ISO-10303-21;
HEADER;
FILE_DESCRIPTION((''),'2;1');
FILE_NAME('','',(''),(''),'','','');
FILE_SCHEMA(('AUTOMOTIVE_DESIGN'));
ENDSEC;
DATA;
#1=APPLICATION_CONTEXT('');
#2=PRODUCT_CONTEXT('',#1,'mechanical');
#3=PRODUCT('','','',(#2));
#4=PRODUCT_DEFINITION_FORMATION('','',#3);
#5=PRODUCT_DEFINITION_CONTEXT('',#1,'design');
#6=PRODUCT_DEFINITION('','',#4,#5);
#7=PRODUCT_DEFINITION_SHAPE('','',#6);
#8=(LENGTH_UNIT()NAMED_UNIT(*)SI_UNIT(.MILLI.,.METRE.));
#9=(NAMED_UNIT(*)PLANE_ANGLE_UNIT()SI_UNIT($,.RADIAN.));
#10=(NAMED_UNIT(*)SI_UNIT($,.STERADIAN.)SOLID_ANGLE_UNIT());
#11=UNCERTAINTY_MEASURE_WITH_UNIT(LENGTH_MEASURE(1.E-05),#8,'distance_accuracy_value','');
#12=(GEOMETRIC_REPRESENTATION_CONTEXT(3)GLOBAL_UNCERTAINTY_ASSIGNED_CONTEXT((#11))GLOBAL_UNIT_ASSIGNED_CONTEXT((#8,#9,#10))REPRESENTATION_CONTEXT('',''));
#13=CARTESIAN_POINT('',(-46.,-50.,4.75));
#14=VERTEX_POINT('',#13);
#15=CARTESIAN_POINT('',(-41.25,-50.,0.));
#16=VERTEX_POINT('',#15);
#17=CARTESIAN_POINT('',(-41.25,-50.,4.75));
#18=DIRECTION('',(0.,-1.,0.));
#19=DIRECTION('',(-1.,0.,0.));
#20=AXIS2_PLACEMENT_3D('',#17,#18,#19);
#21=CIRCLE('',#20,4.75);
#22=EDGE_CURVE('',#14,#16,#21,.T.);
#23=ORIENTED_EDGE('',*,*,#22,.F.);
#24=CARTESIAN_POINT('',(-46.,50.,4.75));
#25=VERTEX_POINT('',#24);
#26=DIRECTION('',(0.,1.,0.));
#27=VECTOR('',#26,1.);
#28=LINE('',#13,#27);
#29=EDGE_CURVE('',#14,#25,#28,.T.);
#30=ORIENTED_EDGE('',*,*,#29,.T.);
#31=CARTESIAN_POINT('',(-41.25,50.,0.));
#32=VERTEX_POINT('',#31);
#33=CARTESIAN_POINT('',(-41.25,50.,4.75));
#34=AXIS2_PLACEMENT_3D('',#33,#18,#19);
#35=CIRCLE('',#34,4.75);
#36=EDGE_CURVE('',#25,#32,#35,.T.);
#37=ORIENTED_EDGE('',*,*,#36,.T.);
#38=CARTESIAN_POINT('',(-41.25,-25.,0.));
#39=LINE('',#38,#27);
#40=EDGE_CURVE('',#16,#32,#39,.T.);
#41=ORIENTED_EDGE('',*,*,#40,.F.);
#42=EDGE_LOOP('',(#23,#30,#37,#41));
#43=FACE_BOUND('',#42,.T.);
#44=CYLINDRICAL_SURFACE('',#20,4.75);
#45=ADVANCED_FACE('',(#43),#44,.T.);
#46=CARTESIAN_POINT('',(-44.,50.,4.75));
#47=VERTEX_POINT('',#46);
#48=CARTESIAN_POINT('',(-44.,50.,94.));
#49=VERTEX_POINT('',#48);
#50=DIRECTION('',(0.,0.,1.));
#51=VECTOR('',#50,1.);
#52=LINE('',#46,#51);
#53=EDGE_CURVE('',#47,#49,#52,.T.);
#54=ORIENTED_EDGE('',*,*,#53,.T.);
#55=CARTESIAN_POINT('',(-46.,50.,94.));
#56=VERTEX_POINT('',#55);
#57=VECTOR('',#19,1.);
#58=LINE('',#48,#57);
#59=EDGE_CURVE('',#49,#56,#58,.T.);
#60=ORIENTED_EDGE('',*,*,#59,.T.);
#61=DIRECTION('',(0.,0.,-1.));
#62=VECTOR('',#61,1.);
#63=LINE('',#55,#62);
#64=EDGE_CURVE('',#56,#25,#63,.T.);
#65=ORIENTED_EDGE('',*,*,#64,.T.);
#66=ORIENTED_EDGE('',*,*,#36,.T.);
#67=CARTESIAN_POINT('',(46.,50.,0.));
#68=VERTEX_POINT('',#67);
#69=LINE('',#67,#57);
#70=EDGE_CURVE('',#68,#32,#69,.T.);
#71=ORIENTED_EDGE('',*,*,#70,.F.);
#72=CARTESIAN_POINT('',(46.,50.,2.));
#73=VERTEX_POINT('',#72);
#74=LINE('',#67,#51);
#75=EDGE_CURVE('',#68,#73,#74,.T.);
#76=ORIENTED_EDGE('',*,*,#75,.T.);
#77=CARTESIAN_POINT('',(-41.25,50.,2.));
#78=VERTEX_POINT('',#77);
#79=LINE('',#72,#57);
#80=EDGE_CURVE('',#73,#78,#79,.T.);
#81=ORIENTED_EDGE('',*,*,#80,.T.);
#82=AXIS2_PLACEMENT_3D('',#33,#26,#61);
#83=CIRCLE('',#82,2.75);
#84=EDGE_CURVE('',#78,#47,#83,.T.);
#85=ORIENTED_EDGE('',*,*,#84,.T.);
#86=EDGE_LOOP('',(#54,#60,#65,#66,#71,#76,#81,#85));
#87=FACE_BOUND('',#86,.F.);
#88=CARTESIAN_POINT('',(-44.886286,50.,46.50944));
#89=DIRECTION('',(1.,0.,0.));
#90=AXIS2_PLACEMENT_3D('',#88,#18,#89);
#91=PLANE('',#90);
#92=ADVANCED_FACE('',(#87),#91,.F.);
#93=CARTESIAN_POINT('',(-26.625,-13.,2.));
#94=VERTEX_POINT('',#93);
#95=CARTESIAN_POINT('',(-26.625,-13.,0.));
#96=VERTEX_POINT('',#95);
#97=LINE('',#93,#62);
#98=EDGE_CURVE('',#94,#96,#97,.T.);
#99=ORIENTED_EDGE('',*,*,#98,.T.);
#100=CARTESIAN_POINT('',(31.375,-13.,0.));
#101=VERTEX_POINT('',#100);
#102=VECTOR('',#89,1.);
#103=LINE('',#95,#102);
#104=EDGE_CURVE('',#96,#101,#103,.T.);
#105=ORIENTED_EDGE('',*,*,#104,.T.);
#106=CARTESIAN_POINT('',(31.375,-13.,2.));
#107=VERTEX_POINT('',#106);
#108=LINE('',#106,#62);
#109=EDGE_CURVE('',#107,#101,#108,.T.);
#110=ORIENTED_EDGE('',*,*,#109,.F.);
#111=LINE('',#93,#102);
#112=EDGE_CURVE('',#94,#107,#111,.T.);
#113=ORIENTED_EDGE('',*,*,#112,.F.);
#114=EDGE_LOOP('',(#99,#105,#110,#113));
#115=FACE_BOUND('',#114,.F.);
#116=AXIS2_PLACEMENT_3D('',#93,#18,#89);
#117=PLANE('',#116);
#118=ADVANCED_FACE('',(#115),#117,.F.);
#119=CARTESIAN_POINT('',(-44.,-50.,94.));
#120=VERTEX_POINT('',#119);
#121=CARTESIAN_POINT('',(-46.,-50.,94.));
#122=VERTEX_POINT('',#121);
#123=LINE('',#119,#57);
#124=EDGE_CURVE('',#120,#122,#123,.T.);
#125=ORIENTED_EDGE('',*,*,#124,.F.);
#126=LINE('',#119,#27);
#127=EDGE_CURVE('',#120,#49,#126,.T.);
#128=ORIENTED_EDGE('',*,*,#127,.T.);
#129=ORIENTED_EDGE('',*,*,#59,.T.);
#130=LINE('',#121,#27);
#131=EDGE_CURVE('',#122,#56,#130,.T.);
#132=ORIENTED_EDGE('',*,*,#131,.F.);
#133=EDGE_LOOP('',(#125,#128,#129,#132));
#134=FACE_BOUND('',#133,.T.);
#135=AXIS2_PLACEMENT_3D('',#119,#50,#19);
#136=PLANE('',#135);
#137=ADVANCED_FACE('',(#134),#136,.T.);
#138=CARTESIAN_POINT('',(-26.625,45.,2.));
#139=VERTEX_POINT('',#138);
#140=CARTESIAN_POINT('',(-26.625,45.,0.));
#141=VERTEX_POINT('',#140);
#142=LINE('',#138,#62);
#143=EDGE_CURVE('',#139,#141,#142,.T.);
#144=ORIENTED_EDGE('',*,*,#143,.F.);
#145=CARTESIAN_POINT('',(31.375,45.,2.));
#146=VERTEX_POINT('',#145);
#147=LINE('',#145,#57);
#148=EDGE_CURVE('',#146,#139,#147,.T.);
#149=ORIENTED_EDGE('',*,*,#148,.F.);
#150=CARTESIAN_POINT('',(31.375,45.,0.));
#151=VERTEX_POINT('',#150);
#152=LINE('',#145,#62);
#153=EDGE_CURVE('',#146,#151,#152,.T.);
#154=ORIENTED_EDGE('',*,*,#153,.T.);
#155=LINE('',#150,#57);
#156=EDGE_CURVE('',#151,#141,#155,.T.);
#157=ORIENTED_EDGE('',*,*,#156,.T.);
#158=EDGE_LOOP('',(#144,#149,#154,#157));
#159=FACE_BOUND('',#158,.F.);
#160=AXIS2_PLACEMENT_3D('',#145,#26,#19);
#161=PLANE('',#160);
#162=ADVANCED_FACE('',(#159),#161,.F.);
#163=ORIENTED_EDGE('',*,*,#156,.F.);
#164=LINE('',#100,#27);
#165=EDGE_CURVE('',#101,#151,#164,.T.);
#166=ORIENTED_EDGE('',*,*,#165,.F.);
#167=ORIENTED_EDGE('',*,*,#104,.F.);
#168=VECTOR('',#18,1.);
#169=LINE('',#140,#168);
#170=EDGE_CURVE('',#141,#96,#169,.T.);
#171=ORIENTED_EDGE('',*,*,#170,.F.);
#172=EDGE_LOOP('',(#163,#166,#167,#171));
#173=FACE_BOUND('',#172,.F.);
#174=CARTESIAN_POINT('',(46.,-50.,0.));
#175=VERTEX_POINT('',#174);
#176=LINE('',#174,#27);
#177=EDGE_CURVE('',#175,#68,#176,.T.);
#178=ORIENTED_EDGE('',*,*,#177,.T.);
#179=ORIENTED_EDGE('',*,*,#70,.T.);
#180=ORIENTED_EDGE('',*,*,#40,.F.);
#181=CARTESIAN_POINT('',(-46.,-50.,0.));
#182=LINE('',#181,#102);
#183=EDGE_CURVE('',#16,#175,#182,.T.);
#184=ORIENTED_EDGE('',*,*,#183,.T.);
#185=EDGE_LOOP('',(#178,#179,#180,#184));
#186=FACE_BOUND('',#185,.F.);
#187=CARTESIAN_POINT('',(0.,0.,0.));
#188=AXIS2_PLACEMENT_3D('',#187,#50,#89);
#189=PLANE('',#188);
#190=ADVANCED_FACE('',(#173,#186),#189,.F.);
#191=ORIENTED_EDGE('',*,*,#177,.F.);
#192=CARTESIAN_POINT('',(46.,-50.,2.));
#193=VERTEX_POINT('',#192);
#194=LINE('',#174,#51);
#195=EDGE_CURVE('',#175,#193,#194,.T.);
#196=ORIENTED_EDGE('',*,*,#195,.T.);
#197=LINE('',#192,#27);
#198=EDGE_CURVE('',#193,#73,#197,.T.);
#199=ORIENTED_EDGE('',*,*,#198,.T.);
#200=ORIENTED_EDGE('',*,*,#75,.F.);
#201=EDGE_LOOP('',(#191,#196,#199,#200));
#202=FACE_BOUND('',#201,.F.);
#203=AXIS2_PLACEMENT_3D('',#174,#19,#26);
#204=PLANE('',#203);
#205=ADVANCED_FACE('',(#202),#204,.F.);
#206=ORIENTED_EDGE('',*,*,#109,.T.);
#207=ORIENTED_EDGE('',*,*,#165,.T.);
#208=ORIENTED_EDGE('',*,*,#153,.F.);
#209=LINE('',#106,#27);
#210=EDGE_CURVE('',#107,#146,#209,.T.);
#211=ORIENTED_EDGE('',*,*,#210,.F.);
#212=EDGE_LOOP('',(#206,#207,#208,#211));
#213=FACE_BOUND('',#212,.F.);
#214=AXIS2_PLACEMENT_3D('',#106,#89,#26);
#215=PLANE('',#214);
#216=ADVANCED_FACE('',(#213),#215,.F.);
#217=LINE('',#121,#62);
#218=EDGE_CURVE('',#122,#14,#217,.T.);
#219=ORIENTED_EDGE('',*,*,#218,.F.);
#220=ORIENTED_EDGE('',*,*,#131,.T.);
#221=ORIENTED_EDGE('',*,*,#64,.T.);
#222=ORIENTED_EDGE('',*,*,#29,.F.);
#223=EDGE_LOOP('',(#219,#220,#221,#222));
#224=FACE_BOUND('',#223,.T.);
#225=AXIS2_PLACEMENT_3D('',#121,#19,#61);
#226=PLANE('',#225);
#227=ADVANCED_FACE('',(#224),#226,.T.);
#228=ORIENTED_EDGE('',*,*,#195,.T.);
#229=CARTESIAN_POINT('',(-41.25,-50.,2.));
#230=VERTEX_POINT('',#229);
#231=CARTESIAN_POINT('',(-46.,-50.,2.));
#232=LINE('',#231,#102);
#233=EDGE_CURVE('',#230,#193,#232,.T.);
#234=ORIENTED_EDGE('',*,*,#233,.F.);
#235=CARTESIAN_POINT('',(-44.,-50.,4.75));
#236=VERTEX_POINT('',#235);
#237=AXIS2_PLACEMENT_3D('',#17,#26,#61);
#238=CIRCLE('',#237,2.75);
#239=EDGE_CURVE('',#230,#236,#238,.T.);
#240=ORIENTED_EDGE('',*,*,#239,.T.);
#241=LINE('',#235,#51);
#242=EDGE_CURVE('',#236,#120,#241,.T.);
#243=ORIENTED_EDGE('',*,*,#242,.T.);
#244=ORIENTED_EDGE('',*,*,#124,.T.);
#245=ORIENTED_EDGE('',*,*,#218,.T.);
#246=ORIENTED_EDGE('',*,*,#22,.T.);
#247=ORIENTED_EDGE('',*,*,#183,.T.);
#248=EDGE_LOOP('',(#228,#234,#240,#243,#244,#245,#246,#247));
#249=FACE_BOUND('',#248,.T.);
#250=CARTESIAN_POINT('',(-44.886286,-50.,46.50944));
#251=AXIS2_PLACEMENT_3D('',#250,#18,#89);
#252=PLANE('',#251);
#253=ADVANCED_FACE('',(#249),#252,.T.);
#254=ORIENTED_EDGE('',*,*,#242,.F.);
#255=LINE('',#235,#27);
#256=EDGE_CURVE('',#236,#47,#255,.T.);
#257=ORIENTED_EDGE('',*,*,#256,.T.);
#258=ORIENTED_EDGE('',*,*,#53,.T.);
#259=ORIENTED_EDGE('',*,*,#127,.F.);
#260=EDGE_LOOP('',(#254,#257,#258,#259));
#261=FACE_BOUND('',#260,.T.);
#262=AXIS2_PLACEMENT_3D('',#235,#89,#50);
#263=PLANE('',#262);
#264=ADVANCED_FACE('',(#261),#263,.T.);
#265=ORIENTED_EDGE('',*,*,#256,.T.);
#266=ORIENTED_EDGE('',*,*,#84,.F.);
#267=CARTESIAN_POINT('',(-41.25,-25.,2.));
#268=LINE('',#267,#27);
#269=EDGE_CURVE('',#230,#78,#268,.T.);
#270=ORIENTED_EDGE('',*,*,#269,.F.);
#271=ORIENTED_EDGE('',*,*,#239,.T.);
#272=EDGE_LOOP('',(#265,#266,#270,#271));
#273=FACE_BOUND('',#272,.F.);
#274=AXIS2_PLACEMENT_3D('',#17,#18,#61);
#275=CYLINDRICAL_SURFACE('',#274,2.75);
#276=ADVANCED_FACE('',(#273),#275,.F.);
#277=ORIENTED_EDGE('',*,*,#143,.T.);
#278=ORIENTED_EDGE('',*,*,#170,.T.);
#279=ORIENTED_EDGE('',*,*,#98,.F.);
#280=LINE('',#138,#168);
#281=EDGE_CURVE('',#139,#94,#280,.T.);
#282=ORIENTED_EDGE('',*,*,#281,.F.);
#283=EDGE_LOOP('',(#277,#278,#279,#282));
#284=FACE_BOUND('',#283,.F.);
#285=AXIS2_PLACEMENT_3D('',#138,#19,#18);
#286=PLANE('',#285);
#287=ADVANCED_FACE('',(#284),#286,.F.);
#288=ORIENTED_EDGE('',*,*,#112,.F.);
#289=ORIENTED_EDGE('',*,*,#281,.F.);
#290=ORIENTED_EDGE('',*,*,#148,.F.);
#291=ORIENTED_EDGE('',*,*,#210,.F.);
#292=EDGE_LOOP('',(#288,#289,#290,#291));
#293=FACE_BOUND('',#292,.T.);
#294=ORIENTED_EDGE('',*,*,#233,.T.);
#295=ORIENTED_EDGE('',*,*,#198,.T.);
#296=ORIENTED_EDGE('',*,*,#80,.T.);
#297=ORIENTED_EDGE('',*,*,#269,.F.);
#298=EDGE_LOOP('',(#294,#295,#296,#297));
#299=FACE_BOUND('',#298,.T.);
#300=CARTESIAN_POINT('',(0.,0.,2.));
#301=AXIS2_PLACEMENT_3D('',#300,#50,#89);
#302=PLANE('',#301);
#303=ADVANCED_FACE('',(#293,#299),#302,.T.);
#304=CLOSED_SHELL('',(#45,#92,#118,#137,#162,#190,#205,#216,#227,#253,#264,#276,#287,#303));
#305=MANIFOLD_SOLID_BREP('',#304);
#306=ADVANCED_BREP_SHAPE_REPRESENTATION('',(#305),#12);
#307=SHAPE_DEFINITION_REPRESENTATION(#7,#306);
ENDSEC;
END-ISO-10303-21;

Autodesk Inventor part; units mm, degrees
ref_plane "YZ Plane" through (0, 0, 0) normal (1, 0, 0) x (0, 1, 0)
ref_plane "XZ Plane" through (0, 0, 0) normal (0, 1, 0) x (-1, 0, 0)
ref_plane "XY Plane" through (0, 0, 0) normal (0, 0, 1) x (1, 0, 0)
sketch "Sketch1" plane through (0, 0, 0) normal (0, 0, 1) x (1, 0, 0)
  line L0 (-46, -50) -> (46, -50)
  line L1 (46, -50) -> (46, 50)
  line L2 (46, 50) -> (-46, 50)
  line L3 (-46, 50) -> (-46, -50)
  line L4 (-46, -50) -> (46, 50) construction
  line L5 (46, -50) -> (-46, 50) construction
  point P0 (0, 0)
  dimension "d154" = 92
  dimension "d155" = 100
extrude "Plate5" add sketch "Sketch1" along normal blind 2
sketch "Sketch7" plane through (-44, -50, 0) normal (-1, 0, 0) x (0, -1, 0)
  line L0 (-100, 0) -> (0, 0)
  line L1 (0, 0) -> (0, 94)
  line L2 (0, 94) -> (-100, 94)
  line L3 (-100, 94) -> (-100, 0)
edge flange "Flange3" height 94 angle 90 thickness 2 bend radius 2.75 thickness toward (-1, 0, 0) relief round relief width 2 relief depth 1 edges at (-46, 0, 2) wall of the first edge with corners at (-44, 50, 0) (-44, -50, 0) (-44, -50, 94) (-44, 50, 94)
bend "Bend3"
corner "Corner3"
sketch "Sketch8" plane through (0, 0, 2) normal (0, 0, 1) x (1, 0, 0)
  line L0 (46, 50) -> (46, -50) projected
  line L1 (-41.25, 50) -> (46, 50) projected
  line L2 (31.375, 45) -> (-26.625, 45)
  line L3 (-26.625, 45) -> (-26.625, -13)
  line L4 (-26.625, -13) -> (31.375, -13)
  line L5 (31.375, -13) -> (31.375, 45)
  line L6 (31.375, 45) -> (-26.625, -13) construction
  line L7 (-26.625, 45) -> (31.375, -13) construction
  point P0 (0, 0)
  point P1 (2.375, 16)
  point P2 (2.375, 50)
  dimension "d167" = 58
  dimension "d168" = 58
  dimension "d169" = 5
extrude "Cut1" cut sketch "Sketch8" against normal blind 2
properties part number "TZS 1652 FDS Central tube wall" material "Stainless Steel"
